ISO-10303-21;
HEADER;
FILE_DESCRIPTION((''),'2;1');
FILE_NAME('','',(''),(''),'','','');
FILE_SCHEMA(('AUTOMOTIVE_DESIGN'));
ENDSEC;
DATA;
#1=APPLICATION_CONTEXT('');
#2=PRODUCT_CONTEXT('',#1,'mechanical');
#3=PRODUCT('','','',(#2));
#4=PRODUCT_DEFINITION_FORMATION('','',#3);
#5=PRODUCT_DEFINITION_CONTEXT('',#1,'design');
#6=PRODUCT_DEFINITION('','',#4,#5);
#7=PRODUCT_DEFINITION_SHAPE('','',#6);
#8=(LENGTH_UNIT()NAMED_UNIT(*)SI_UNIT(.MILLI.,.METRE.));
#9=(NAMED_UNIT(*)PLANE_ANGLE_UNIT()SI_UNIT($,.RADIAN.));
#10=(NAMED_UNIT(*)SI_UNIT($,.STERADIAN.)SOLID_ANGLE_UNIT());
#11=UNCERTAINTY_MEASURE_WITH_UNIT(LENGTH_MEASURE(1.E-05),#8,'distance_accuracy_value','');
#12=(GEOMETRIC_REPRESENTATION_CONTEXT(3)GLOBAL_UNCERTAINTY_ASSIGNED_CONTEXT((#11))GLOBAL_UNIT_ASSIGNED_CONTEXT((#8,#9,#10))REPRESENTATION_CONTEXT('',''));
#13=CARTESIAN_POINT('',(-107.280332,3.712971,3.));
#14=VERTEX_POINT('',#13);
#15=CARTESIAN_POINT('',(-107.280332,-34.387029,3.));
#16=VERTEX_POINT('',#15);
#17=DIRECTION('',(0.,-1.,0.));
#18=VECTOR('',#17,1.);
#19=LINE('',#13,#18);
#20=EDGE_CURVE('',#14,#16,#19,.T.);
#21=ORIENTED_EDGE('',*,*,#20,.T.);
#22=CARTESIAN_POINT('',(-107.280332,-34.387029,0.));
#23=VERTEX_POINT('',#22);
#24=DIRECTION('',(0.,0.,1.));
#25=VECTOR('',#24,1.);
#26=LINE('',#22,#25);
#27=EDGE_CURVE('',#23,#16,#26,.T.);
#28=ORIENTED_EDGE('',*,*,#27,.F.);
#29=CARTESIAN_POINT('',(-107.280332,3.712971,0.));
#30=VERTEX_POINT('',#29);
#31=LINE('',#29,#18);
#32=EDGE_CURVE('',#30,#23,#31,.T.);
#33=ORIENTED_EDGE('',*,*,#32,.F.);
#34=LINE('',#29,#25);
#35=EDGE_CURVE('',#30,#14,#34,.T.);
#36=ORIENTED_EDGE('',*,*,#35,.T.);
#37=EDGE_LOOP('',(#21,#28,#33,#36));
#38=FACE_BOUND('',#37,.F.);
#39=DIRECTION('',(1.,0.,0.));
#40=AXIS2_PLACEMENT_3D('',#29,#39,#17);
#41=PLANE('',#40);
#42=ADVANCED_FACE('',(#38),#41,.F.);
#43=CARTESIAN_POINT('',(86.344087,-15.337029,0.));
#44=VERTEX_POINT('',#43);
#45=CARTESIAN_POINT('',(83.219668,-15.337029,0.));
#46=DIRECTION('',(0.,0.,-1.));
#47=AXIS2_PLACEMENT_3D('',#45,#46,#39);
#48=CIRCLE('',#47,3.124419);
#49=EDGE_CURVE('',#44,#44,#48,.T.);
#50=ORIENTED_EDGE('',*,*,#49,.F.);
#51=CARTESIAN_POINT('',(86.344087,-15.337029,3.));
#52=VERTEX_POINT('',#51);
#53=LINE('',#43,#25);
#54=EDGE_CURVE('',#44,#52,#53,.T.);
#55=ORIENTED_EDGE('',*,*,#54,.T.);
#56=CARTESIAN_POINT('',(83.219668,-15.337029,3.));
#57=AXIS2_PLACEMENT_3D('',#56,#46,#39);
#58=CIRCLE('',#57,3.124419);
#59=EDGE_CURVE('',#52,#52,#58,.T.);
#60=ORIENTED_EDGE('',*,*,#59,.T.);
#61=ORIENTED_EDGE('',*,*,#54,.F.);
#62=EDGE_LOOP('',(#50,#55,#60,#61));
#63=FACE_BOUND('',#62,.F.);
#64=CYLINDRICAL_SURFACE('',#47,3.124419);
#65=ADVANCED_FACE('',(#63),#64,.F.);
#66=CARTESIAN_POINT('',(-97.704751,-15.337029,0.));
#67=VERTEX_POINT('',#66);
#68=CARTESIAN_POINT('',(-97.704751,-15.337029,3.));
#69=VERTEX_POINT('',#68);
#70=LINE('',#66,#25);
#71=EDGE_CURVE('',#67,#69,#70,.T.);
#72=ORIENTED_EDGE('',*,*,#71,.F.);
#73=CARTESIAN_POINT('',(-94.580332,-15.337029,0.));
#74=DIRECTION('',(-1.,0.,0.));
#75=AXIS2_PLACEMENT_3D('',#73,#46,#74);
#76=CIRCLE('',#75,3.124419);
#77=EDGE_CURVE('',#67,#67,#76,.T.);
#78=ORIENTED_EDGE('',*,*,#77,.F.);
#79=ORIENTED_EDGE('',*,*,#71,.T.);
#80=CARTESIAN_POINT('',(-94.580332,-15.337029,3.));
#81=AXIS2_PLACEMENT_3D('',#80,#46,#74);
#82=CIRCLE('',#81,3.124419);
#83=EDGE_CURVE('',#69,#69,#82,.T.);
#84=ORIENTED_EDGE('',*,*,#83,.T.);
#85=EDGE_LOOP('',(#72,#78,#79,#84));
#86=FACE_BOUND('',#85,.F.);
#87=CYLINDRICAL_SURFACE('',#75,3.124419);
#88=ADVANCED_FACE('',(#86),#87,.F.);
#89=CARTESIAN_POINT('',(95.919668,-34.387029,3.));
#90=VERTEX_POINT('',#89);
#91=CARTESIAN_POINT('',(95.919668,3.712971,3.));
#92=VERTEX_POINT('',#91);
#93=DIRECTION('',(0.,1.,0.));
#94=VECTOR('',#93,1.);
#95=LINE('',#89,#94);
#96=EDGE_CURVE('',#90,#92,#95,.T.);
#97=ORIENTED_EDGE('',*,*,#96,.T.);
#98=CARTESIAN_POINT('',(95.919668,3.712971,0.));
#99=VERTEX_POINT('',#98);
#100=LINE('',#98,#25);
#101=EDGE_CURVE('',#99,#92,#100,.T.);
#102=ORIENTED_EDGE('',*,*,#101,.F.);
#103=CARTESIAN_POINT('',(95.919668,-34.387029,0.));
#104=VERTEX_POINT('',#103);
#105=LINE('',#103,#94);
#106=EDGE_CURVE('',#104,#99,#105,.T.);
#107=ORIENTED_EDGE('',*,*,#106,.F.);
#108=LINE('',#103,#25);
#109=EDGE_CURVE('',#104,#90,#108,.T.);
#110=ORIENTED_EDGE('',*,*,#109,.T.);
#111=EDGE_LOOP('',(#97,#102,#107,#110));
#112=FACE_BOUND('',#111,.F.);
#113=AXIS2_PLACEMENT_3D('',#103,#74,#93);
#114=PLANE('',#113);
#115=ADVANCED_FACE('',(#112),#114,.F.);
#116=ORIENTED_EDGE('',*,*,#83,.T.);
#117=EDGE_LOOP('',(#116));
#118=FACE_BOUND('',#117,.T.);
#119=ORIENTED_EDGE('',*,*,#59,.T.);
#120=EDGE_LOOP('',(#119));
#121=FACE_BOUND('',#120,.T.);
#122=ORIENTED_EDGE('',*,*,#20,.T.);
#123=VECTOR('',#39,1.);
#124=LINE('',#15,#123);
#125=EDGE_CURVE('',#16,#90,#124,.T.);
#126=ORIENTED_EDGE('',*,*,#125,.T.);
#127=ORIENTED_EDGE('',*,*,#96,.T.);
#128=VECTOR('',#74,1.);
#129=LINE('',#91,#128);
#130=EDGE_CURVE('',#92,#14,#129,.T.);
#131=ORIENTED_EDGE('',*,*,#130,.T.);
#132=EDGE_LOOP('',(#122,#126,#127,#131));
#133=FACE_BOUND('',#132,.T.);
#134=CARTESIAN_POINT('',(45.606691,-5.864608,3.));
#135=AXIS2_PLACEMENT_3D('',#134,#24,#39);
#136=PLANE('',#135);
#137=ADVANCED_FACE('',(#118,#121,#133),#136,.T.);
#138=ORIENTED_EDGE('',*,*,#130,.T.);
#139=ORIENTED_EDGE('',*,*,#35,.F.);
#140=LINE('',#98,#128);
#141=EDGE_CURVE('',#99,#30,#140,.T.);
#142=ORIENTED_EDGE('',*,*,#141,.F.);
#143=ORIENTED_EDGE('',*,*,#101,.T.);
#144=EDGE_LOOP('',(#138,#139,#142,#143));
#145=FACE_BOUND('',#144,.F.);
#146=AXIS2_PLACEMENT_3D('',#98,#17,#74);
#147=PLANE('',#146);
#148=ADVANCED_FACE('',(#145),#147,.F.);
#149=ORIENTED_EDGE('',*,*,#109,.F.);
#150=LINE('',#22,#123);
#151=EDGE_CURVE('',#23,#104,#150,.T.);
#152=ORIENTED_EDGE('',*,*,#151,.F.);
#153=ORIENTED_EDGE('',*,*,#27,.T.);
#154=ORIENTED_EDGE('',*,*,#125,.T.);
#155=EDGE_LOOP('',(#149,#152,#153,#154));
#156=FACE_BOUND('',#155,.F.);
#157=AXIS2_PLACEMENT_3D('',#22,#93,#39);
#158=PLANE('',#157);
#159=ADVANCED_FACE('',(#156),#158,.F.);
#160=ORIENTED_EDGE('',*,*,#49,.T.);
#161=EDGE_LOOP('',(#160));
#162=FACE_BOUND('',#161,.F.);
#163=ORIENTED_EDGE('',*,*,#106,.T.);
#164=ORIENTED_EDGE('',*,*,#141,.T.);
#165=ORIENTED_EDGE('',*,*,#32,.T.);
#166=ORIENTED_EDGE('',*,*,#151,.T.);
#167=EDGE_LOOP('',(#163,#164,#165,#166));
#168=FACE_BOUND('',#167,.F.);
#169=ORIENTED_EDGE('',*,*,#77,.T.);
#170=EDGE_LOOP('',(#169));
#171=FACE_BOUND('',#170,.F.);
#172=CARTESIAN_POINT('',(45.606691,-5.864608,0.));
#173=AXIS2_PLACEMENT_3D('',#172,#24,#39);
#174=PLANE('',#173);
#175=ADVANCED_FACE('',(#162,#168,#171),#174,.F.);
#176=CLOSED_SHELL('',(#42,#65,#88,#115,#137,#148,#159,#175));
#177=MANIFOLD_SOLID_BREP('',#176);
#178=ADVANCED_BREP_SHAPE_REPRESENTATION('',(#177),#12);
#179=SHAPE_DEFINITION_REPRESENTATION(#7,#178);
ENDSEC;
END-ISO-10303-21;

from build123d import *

# Parameters (mm, degrees)
F1_DEPTH = 3


with BuildPart() as f1:
    # F0 (on Top) → F1 (new body)
    with BuildSketch(Plane.XY):
        with BuildLine():
            Line((95.9196680397, 3.7129714398), (-5.6803319603, 3.7129714398))
            Line((-5.6803319603, 3.7129714398), (-5.6803319603, -15.3370285602))
            Line((-5.6803319603, -15.3370285602), (45.1196680397, -15.3370285602))
            Line((45.1196680397, -15.3370285602), (70.5196680397, -15.3370285602))
            Line((70.5196680397, -15.3370285602), (80.0952486641, -15.3370285602))
            ThreePointArc((80.0952486641, -15.3370285602), (83.2196680397, -12.2126091846), (86.3440874153, -15.3370285602))
            Line((86.3440874153, -15.3370285602), (95.9196680397, -15.3370285602))
            Line((95.9196680397, -15.3370285602), (95.9196680397, 3.7129714398))
        make_face()
        with BuildLine():
            Line((-97.7047513359, -15.3370285602), (-107.2803319603, -15.3370285602))
            Line((-107.2803319603, -15.3370285602), (-107.2803319603, -34.3870285602))
            Line((-107.2803319603, -34.3870285602), (-5.6803319603, -34.3870285602))
            Line((-5.6803319603, -34.3870285602), (-5.6803319603, -15.3370285602))
            Line((-5.6803319603, -15.3370285602), (-91.4559125847, -15.3370285602))
            ThreePointArc((-91.4559125847, -15.3370285602), (-94.5803319603, -18.4614479358), (-97.7047513359, -15.3370285602))
        make_face()
        with BuildLine():
            Line((45.1196680397, -15.3370285602), (-5.6803319603, -15.3370285602))
            Line((-5.6803319603, -15.3370285602), (-5.6803319603, -34.3870285602))
            Line((-5.6803319603, -34.3870285602), (95.9196680397, -34.3870285602))
            Line((95.9196680397, -34.3870285602), (95.9196680397, -15.3370285602))
            Line((95.9196680397, -15.3370285602), (86.3440874153, -15.3370285602))
            ThreePointArc((86.3440874153, -15.3370285602), (83.2196680397, -18.4614479358), (80.0952486641, -15.3370285602))
            Line((80.0952486641, -15.3370285602), (70.5196680397, -15.3370285602))
            Line((70.5196680397, -15.3370285602), (45.1196680397, -15.3370285602))
        make_face()
        with BuildLine():
            Line((-5.6803319603, 3.7129714398), (-107.2803319603, 3.7129714398))
            Line((-107.2803319603, 3.7129714398), (-107.2803319603, -15.3370285602))
            Line((-107.2803319603, -15.3370285602), (-97.7047513359, -15.3370285602))
            ThreePointArc((-97.7047513359, -15.3370285602), (-94.5803319603, -12.2126091846), (-91.4559125847, -15.3370285602))
            Line((-91.4559125847, -15.3370285602), (-5.6803319603, -15.3370285602))
            Line((-5.6803319603, -15.3370285602), (-5.6803319603, 3.7129714398))
        make_face()
    extrude(amount=F1_DEPTH)


solid = f1.part
